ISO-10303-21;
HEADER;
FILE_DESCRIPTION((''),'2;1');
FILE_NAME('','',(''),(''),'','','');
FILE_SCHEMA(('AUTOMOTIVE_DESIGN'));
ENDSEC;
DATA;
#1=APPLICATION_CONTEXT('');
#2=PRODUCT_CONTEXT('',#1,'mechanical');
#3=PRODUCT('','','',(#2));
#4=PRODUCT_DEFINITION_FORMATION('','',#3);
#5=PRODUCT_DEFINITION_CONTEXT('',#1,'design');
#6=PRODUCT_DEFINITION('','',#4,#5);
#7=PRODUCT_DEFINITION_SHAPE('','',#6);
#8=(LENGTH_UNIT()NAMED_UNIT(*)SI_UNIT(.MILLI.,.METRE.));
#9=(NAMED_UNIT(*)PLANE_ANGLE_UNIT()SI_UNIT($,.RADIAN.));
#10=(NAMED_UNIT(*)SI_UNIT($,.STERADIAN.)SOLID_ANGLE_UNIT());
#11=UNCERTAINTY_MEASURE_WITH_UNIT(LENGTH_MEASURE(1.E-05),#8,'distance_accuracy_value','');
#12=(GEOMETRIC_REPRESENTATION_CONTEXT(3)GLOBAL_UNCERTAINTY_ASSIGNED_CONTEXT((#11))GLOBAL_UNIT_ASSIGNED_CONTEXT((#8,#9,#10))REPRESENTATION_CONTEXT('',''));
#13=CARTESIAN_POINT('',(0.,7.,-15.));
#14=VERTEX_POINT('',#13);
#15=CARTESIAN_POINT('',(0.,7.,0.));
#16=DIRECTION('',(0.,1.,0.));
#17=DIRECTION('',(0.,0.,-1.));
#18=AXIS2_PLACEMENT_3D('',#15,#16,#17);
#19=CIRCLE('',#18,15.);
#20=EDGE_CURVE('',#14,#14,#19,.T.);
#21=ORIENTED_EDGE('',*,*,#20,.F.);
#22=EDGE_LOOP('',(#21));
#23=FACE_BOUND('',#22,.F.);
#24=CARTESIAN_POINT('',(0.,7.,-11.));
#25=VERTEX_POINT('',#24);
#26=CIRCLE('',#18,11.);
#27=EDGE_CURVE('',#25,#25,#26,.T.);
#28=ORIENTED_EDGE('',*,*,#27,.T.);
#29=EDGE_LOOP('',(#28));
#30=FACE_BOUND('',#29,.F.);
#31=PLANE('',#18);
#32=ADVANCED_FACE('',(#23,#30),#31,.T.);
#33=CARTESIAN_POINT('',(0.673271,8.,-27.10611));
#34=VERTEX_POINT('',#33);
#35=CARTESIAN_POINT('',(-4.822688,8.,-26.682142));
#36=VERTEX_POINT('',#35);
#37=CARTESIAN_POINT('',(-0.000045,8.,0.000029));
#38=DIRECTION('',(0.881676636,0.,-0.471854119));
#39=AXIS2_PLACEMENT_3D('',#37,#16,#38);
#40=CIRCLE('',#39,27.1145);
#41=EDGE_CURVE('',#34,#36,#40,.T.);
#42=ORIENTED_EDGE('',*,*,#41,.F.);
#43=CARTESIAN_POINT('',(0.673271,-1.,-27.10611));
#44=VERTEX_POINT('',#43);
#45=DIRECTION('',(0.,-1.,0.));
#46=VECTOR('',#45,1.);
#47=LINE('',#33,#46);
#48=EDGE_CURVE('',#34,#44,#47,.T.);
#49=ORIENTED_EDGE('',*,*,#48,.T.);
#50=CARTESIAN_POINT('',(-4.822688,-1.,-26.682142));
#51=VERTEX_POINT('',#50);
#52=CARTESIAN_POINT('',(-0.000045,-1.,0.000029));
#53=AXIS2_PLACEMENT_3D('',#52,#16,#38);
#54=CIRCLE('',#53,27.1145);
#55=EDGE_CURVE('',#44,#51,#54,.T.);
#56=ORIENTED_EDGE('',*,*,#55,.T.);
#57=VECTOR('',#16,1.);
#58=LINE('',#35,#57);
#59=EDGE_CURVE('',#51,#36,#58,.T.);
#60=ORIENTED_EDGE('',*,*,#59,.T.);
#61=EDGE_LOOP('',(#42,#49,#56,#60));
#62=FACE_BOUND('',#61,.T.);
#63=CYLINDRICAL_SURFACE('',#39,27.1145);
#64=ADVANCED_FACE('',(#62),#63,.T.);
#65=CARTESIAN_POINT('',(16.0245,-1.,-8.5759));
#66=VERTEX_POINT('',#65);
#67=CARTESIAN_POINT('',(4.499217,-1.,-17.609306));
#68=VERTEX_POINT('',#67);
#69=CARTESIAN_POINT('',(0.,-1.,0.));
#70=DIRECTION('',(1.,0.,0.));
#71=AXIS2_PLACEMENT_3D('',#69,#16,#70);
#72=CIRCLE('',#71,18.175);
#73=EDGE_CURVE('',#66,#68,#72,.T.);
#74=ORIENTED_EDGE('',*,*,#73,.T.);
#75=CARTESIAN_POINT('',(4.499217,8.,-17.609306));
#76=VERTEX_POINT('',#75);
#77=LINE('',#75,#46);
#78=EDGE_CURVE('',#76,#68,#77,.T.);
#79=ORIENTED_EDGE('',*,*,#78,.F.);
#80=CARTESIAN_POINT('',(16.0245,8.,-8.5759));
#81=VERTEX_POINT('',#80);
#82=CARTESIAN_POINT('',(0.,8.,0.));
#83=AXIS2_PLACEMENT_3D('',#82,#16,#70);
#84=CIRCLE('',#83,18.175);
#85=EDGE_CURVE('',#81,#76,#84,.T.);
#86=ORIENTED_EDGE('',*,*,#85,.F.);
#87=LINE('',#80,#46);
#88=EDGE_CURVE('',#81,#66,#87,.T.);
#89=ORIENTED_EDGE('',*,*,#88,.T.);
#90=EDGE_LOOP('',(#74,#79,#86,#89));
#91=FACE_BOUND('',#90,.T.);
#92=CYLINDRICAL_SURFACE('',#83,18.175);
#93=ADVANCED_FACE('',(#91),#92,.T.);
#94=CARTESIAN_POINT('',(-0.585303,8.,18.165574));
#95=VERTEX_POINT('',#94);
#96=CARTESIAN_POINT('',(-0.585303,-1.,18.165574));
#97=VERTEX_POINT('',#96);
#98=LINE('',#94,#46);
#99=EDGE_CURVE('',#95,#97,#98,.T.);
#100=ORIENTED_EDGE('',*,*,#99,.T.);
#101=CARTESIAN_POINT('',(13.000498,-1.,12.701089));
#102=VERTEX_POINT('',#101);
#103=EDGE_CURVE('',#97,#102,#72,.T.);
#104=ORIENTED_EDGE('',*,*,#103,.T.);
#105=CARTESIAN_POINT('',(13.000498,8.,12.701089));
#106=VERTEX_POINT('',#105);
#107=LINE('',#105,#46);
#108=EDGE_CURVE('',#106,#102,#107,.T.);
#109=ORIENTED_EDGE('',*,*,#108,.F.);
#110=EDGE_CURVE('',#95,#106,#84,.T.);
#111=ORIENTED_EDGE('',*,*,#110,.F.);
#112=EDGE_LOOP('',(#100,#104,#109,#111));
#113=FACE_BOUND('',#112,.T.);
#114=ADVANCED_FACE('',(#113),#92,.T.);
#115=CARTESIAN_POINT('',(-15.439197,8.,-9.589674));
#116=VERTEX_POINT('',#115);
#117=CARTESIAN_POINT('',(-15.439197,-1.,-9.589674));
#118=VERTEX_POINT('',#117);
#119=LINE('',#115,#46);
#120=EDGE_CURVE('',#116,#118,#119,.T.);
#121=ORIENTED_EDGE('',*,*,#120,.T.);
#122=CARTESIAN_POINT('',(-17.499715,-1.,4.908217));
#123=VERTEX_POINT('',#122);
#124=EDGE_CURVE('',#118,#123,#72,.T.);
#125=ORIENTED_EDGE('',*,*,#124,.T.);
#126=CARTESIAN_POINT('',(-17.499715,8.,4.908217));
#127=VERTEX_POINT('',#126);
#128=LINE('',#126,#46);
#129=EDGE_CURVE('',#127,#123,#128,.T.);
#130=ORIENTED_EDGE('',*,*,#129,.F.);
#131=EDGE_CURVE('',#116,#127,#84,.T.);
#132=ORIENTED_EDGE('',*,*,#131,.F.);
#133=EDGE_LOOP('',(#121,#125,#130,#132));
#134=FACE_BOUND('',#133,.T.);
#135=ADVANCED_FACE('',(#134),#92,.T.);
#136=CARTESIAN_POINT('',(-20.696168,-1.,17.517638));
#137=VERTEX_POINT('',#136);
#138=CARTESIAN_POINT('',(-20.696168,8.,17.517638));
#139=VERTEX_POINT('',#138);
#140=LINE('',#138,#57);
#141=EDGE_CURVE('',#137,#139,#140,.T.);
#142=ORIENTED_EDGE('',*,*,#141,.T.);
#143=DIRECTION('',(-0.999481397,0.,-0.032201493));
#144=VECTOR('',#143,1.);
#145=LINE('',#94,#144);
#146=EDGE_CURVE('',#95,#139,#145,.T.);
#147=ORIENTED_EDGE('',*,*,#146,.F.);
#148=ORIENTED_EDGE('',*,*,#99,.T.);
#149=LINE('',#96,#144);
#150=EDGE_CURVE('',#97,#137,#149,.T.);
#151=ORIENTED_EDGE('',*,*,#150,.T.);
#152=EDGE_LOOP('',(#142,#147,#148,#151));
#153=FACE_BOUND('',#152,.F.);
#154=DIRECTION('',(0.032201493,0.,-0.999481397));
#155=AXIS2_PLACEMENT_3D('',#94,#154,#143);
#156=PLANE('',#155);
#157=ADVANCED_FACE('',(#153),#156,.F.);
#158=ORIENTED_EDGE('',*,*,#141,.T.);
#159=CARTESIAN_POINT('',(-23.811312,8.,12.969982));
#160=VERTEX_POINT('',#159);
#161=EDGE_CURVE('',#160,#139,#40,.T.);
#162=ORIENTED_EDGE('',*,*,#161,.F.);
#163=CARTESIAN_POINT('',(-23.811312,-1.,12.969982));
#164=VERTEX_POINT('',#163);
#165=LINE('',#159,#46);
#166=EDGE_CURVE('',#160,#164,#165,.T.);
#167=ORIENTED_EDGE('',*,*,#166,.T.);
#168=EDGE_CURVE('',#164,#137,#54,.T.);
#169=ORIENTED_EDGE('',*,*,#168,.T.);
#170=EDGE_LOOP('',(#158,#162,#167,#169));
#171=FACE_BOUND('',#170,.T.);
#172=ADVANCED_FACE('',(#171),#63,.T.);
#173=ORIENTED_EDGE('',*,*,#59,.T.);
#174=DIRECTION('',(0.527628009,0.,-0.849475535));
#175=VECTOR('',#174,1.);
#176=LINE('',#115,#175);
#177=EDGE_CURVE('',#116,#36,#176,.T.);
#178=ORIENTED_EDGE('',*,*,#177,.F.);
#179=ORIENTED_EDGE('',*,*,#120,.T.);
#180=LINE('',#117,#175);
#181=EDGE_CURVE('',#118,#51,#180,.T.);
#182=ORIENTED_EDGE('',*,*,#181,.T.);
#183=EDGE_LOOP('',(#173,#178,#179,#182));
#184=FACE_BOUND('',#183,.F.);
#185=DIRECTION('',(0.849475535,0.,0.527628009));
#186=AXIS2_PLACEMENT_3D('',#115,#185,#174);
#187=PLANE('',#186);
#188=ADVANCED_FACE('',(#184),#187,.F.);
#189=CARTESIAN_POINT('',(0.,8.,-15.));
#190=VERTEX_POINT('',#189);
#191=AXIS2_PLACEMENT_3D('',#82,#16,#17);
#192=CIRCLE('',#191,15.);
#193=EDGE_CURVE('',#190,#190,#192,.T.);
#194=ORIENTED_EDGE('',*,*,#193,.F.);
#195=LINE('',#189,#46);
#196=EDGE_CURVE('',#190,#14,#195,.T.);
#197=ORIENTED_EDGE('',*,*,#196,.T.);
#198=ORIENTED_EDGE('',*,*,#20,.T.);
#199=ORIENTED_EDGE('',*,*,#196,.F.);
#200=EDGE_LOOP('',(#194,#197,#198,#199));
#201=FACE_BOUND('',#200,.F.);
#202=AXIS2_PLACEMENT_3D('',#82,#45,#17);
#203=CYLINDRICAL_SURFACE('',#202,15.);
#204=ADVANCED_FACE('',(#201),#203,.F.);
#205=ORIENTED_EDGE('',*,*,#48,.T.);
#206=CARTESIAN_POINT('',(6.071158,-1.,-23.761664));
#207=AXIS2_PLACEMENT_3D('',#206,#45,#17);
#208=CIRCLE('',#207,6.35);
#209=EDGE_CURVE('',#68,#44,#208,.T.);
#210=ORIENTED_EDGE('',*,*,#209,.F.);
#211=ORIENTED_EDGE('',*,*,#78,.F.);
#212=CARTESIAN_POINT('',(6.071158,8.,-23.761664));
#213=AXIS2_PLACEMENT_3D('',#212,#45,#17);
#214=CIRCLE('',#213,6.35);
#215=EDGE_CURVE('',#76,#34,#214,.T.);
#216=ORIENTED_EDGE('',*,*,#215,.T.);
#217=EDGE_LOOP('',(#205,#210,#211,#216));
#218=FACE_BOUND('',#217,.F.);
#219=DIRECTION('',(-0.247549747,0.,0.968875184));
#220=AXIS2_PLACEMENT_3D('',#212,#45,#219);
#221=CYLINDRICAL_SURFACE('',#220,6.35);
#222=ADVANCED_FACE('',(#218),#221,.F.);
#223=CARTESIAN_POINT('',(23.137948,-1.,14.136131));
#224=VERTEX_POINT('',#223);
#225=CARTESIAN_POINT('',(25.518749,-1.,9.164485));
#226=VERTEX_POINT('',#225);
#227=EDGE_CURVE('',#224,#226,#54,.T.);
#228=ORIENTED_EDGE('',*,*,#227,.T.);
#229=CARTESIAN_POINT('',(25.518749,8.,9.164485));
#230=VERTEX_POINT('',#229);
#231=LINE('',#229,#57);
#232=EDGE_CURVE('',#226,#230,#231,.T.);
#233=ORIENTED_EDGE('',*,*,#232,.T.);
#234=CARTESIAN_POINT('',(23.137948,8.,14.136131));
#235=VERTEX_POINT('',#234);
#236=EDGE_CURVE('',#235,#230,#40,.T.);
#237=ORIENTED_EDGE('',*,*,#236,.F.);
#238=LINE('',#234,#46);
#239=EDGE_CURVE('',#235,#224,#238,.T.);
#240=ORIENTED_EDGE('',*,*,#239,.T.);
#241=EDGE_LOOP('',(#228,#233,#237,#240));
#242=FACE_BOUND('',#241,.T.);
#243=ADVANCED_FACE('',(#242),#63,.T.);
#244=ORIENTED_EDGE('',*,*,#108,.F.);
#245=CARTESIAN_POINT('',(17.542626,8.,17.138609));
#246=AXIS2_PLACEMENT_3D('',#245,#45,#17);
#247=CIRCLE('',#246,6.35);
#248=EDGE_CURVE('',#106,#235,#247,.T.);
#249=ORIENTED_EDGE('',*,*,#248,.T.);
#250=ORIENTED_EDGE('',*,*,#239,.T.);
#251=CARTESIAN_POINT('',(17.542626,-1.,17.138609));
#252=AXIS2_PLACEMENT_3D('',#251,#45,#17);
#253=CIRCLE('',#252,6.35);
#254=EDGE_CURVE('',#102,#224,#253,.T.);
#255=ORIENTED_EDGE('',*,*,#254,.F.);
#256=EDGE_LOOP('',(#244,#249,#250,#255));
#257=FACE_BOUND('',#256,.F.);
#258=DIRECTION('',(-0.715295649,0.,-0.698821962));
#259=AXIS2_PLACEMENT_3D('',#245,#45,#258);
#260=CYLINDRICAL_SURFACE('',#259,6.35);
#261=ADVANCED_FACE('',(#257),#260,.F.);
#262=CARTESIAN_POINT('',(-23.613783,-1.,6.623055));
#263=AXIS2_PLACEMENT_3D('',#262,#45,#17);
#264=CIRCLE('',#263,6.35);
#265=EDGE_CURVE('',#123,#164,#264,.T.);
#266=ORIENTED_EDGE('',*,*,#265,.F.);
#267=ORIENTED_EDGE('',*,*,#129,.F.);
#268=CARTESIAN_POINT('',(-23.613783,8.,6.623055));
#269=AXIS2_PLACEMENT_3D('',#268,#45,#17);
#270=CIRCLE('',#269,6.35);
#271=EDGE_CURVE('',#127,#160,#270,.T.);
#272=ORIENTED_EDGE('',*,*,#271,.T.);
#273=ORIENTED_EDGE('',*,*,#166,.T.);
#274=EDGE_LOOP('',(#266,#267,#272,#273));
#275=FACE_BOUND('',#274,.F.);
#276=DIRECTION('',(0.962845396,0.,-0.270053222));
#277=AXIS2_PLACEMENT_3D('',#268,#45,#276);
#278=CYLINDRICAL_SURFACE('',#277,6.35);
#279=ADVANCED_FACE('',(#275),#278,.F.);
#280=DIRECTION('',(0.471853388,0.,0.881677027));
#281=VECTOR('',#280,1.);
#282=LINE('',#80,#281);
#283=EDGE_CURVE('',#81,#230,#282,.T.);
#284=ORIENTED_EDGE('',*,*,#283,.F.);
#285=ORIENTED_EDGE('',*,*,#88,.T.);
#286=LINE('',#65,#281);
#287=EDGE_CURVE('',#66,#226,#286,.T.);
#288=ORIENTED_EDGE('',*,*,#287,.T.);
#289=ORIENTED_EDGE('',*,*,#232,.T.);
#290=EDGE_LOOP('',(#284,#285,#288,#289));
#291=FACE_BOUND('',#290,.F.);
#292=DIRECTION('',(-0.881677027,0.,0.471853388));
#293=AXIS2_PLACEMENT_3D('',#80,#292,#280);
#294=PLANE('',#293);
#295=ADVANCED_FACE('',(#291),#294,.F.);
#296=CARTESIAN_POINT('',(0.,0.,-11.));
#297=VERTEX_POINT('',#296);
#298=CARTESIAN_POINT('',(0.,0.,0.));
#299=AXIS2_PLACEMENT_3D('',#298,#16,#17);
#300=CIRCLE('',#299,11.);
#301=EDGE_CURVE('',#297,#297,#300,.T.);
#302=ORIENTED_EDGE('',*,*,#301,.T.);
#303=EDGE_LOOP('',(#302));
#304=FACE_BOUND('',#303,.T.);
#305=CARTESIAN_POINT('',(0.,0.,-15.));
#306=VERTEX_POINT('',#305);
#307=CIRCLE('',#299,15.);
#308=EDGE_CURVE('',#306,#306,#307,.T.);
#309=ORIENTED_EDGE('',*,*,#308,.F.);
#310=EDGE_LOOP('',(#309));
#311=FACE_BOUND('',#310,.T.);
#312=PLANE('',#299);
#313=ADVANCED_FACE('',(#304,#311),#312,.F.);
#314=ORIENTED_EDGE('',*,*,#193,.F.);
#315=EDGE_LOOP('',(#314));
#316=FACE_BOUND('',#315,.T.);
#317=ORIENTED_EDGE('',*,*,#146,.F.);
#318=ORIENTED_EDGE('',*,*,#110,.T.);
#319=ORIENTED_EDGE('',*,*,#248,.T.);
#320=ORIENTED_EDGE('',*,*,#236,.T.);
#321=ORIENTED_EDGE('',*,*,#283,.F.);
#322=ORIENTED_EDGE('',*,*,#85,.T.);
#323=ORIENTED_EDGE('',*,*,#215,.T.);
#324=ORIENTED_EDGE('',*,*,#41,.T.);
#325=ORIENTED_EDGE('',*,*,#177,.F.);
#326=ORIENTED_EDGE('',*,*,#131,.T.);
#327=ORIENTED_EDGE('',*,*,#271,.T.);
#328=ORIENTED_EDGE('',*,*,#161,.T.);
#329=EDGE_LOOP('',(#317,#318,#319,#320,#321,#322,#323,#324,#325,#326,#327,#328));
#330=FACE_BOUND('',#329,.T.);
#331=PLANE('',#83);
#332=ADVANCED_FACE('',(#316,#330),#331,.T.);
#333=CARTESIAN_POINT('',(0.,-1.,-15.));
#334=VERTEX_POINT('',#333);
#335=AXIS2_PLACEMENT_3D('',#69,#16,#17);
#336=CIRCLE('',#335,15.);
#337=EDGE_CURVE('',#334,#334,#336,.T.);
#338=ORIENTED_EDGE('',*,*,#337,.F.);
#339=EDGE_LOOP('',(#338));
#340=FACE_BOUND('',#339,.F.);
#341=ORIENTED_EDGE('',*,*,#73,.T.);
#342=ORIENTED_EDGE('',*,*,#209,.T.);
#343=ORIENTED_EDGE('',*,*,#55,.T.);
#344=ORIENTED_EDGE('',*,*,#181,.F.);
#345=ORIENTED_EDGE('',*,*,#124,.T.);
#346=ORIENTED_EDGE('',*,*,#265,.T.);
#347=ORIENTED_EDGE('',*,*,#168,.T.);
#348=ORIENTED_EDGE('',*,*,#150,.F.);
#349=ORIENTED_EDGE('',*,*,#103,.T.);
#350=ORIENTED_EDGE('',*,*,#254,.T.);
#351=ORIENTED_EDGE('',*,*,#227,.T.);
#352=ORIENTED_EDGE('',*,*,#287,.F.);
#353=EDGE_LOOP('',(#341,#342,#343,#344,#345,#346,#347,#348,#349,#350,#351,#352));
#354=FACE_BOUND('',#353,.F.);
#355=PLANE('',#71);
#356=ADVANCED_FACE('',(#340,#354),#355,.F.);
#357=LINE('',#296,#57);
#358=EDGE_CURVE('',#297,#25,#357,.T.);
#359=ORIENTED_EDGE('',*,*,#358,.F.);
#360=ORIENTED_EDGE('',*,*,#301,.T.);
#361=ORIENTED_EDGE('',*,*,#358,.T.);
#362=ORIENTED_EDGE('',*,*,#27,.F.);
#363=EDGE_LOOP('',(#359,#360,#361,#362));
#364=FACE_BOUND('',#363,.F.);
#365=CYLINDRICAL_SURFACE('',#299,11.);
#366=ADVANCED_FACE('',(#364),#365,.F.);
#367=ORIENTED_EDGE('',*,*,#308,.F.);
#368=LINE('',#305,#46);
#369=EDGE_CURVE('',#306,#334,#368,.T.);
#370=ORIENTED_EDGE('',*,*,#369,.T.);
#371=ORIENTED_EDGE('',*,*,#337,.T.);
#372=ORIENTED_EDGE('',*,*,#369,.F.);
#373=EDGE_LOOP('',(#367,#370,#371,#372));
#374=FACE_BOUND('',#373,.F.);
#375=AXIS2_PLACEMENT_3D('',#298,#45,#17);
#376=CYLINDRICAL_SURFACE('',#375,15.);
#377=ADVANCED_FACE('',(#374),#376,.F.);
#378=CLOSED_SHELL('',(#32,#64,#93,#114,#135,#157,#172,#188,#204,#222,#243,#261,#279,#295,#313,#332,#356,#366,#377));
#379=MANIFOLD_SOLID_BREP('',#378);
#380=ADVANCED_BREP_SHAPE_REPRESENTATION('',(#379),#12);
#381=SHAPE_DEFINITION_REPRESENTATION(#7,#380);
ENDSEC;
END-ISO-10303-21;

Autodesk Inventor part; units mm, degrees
ref_plane "YZ Plane" through (0, 0, 0) normal (1, 0, 0) x (0, 1, 0)
sketch "Sketch3" plane through (0, 0, 0) normal (1, 0, 0) x (0, 1, 0)
  line L0 (0, 0) -> (0, -11) construction
  line L1 (0, 0) -> (7, 0) construction
  line L2 (7, 0) -> (7, -11) construction
  line L3 (0, -11) -> (0, -41.91)
  line L4 (0, -41.91) -> (-1.9706, -41.91) construction
  line L5 (0, -11) -> (7, -11)
  line L6 (7, -11) -> (7, -41.91)
  line L7 (0, -41.91) -> (0, -39.6842) construction
  line L8 (0, -41.91) -> (7, -41.91)
  dimension "d7" = 7
  dimension "d8" = 11
  dimension "d9" = 41.91
revolve "Revolution1" add sketch "Sketch3" angle 360 about axis through (0, 0, 0) along (0, 1, 0)
ref_plane "Work Plane2" through (0, 0, 0) normal (-1, 0, 0) x (0, 1, 0)
sketch "Sketch4" plane through (0, 0, 0) normal (-1, 0, 0) x (0, 1, 0)
  line L0 (0, 0) -> (7, 0)
  line L1 (7, 41.91) -> (7, -41.91) projected
  line L2 (7, 0) -> (7, 11)
  line L3 (7, 0) -> (8, 0)
  line L4 (8, 0) -> (8, 15)
  line L5 (8, 15) -> (7, 15)
  line L6 (8, 15) -> (8, 41.91)
  line L7 (8, 41.91) -> (7, 41.91)
  line L8 (0, 0) -> (0, 0.75)
  line L9 (0, 11) -> (0, -11) projected
  line L10 (8, 15) -> (0, 15)
  line L11 (0, 41.91) -> (0, -41.91) projected
  line L12 (0, 15) -> (-1, 15)
  line L13 (-1, 15) -> (-1, 41.91)
  line L14 (-1, 41.91) -> (0, 41.91)
  dimension "d16" = 11
  dimension "d17" = 1
  dimension "d18" = 15
  dimension "d20" = 0.75
  dimension "d21" = 1
ref_plane "Work Plane3" through (0, 3.5, 0) normal (0, 1, 0) x (1, 0, 0)
revolve "Revolution2" add sketch "Sketch4" angle 360 about axis through (0, 0, 0) along (0, 1, 0) contours L12 L13 L14 L11 | L1 L7 L6 L5
sketch "Sketch5" plane through (0, 8, 0) normal (0, 1, 0) x (1, 0, 0)
  circle A0 centre (0, 0) radius 18.175
  circle A1 centre (0, 0) radius 15 projected
  circle A2 centre (0, 0) radius 41.91 projected
  circle A3 centre (0, 0) radius 35.56
  dimension "d22" = 3.175
  dimension "d23" = 6.35
extrude "Extrusion2" cut sketch "Sketch5" against normal through all contours A3
sketch "Sketch6" plane through (0, 8, 0) normal (0, 1, 0) x (1, 0, 0)
  circle A0 centre (0, 0) radius 18.175 projected
  circle A1 centre (0, 0) radius 35.56 projected
  line L0 (16.0245, 8.5759) -> (30.4464, -18.372)
  line L1 (27.5834, -22.4426) -> (17.7246, -4.0211)
  dimension "d26" = 4.445
extrude "Extrusion3" add sketch "Sketch6" against normal up to surface (9 mm away) contours A0 L0 A1 L1 picked at (22.1844, -5.1361)
pattern_circular "Circular Pattern1" count 3 over 360 about axis through (0, 3.5, 0) along (0, -1, 0) of "Extrusion3"
fillet "Fillet1" radius 6.35 3 edges at (-5.3799, 3.5, -17.3605) (17.7246, 3.5, 4.0211) (-12.3447, 3.5, 13.3394)
fillet "Fillet1" radius 3.175 3 edges at (27.5834, 3.5, 22.4426) (-33.2276, 3.5, 12.6666) (5.6442, 3.5, -35.1092)
fillet "Fillet1" radius 3.175 3 edges at (0.6874, 3.5, -35.5534) (-31.1338, 3.5, 17.1814) (30.4464, 3.5, 18.372)
sketch "Sketch7" plane through (0, 0, 0) normal (-1, 0, 0) x (0, 1, 0)
  line L0 (8, -41.91) -> (8, 41.91) projected
  line L1 (-1, -41.91) -> (-1, 41.91) projected
  line L2 (8, -41.91) -> (-1, -41.91) projected
  arc A0 (6.04, -41.91) -> (8, -35.56) centre (-3.2664, -35.56) ccw
  arc A1 (-1, -35.56) -> (0.96, -41.91) centre (10.2664, -35.56) ccw
  line L3 (0.96, -41.91) -> (6.04, -41.91)
  line L4 (-1, -35.56) -> (8, -35.56)
  line L5 (8, -22.57) -> (-1, -22.57) projected
  line L6 (8, -24.1718) -> (8, -35.56) projected
  line L7 (-1, -24.1718) -> (8, -24.1718) projected
  line L8 (-1, -22.57) -> (-1, -24.1718) projected
  line L9 (8, -35.56) -> (8, -35.56) projected
  line L10 (0, 0) -> (11.7377, 0)
  dimension "d36" = 6.35
  dimension "d37" = 5.08
revolve "Revolution3" cut sketch "Sketch7" angle 360 about axis through (0, 0, 0) along (0, 1, 0) contours L2 A0 L0 | A1 L2 L1
fillet "Fillet2" radius 1.5875 4 edges at (41.91, 6.04, 0) (-41.91, 6.04, 0) (-41.91, 0.96, 0) (41.91, 0.96, 0)
sketch "Sketch8" plane through (27.5145, 8, 12.8937) normal (0, 1, 0) x (0.8816766, 0, -0.4718541)
  circle A0 centre (-18.175, 24.3509) radius 19.05
  arc A1 (-27.2625, 8.6109) -> (-12.7058, 7.0183) centre (-18.175, 24.3509) ccw projected
  dimension "d40" = 38.1
sketch "Sketch9" plane through (27.5145, 8, 12.8937) normal (0, 1, 0) x (0.8816766, 0, -0.4718541)
  circle A0 centre (-18.175, 24.3509) radius 27.1145
  circle A1 centre (-18.175, 24.3509) radius 41.91
  circle A2 centre (-18.175, 24.3509) radius 41.91 projected
  dimension "d41" = 54.229
extrude "Extrusion4" cut sketch "Sketch9" against normal blind 25.4
properties part number "Spinner 1"
